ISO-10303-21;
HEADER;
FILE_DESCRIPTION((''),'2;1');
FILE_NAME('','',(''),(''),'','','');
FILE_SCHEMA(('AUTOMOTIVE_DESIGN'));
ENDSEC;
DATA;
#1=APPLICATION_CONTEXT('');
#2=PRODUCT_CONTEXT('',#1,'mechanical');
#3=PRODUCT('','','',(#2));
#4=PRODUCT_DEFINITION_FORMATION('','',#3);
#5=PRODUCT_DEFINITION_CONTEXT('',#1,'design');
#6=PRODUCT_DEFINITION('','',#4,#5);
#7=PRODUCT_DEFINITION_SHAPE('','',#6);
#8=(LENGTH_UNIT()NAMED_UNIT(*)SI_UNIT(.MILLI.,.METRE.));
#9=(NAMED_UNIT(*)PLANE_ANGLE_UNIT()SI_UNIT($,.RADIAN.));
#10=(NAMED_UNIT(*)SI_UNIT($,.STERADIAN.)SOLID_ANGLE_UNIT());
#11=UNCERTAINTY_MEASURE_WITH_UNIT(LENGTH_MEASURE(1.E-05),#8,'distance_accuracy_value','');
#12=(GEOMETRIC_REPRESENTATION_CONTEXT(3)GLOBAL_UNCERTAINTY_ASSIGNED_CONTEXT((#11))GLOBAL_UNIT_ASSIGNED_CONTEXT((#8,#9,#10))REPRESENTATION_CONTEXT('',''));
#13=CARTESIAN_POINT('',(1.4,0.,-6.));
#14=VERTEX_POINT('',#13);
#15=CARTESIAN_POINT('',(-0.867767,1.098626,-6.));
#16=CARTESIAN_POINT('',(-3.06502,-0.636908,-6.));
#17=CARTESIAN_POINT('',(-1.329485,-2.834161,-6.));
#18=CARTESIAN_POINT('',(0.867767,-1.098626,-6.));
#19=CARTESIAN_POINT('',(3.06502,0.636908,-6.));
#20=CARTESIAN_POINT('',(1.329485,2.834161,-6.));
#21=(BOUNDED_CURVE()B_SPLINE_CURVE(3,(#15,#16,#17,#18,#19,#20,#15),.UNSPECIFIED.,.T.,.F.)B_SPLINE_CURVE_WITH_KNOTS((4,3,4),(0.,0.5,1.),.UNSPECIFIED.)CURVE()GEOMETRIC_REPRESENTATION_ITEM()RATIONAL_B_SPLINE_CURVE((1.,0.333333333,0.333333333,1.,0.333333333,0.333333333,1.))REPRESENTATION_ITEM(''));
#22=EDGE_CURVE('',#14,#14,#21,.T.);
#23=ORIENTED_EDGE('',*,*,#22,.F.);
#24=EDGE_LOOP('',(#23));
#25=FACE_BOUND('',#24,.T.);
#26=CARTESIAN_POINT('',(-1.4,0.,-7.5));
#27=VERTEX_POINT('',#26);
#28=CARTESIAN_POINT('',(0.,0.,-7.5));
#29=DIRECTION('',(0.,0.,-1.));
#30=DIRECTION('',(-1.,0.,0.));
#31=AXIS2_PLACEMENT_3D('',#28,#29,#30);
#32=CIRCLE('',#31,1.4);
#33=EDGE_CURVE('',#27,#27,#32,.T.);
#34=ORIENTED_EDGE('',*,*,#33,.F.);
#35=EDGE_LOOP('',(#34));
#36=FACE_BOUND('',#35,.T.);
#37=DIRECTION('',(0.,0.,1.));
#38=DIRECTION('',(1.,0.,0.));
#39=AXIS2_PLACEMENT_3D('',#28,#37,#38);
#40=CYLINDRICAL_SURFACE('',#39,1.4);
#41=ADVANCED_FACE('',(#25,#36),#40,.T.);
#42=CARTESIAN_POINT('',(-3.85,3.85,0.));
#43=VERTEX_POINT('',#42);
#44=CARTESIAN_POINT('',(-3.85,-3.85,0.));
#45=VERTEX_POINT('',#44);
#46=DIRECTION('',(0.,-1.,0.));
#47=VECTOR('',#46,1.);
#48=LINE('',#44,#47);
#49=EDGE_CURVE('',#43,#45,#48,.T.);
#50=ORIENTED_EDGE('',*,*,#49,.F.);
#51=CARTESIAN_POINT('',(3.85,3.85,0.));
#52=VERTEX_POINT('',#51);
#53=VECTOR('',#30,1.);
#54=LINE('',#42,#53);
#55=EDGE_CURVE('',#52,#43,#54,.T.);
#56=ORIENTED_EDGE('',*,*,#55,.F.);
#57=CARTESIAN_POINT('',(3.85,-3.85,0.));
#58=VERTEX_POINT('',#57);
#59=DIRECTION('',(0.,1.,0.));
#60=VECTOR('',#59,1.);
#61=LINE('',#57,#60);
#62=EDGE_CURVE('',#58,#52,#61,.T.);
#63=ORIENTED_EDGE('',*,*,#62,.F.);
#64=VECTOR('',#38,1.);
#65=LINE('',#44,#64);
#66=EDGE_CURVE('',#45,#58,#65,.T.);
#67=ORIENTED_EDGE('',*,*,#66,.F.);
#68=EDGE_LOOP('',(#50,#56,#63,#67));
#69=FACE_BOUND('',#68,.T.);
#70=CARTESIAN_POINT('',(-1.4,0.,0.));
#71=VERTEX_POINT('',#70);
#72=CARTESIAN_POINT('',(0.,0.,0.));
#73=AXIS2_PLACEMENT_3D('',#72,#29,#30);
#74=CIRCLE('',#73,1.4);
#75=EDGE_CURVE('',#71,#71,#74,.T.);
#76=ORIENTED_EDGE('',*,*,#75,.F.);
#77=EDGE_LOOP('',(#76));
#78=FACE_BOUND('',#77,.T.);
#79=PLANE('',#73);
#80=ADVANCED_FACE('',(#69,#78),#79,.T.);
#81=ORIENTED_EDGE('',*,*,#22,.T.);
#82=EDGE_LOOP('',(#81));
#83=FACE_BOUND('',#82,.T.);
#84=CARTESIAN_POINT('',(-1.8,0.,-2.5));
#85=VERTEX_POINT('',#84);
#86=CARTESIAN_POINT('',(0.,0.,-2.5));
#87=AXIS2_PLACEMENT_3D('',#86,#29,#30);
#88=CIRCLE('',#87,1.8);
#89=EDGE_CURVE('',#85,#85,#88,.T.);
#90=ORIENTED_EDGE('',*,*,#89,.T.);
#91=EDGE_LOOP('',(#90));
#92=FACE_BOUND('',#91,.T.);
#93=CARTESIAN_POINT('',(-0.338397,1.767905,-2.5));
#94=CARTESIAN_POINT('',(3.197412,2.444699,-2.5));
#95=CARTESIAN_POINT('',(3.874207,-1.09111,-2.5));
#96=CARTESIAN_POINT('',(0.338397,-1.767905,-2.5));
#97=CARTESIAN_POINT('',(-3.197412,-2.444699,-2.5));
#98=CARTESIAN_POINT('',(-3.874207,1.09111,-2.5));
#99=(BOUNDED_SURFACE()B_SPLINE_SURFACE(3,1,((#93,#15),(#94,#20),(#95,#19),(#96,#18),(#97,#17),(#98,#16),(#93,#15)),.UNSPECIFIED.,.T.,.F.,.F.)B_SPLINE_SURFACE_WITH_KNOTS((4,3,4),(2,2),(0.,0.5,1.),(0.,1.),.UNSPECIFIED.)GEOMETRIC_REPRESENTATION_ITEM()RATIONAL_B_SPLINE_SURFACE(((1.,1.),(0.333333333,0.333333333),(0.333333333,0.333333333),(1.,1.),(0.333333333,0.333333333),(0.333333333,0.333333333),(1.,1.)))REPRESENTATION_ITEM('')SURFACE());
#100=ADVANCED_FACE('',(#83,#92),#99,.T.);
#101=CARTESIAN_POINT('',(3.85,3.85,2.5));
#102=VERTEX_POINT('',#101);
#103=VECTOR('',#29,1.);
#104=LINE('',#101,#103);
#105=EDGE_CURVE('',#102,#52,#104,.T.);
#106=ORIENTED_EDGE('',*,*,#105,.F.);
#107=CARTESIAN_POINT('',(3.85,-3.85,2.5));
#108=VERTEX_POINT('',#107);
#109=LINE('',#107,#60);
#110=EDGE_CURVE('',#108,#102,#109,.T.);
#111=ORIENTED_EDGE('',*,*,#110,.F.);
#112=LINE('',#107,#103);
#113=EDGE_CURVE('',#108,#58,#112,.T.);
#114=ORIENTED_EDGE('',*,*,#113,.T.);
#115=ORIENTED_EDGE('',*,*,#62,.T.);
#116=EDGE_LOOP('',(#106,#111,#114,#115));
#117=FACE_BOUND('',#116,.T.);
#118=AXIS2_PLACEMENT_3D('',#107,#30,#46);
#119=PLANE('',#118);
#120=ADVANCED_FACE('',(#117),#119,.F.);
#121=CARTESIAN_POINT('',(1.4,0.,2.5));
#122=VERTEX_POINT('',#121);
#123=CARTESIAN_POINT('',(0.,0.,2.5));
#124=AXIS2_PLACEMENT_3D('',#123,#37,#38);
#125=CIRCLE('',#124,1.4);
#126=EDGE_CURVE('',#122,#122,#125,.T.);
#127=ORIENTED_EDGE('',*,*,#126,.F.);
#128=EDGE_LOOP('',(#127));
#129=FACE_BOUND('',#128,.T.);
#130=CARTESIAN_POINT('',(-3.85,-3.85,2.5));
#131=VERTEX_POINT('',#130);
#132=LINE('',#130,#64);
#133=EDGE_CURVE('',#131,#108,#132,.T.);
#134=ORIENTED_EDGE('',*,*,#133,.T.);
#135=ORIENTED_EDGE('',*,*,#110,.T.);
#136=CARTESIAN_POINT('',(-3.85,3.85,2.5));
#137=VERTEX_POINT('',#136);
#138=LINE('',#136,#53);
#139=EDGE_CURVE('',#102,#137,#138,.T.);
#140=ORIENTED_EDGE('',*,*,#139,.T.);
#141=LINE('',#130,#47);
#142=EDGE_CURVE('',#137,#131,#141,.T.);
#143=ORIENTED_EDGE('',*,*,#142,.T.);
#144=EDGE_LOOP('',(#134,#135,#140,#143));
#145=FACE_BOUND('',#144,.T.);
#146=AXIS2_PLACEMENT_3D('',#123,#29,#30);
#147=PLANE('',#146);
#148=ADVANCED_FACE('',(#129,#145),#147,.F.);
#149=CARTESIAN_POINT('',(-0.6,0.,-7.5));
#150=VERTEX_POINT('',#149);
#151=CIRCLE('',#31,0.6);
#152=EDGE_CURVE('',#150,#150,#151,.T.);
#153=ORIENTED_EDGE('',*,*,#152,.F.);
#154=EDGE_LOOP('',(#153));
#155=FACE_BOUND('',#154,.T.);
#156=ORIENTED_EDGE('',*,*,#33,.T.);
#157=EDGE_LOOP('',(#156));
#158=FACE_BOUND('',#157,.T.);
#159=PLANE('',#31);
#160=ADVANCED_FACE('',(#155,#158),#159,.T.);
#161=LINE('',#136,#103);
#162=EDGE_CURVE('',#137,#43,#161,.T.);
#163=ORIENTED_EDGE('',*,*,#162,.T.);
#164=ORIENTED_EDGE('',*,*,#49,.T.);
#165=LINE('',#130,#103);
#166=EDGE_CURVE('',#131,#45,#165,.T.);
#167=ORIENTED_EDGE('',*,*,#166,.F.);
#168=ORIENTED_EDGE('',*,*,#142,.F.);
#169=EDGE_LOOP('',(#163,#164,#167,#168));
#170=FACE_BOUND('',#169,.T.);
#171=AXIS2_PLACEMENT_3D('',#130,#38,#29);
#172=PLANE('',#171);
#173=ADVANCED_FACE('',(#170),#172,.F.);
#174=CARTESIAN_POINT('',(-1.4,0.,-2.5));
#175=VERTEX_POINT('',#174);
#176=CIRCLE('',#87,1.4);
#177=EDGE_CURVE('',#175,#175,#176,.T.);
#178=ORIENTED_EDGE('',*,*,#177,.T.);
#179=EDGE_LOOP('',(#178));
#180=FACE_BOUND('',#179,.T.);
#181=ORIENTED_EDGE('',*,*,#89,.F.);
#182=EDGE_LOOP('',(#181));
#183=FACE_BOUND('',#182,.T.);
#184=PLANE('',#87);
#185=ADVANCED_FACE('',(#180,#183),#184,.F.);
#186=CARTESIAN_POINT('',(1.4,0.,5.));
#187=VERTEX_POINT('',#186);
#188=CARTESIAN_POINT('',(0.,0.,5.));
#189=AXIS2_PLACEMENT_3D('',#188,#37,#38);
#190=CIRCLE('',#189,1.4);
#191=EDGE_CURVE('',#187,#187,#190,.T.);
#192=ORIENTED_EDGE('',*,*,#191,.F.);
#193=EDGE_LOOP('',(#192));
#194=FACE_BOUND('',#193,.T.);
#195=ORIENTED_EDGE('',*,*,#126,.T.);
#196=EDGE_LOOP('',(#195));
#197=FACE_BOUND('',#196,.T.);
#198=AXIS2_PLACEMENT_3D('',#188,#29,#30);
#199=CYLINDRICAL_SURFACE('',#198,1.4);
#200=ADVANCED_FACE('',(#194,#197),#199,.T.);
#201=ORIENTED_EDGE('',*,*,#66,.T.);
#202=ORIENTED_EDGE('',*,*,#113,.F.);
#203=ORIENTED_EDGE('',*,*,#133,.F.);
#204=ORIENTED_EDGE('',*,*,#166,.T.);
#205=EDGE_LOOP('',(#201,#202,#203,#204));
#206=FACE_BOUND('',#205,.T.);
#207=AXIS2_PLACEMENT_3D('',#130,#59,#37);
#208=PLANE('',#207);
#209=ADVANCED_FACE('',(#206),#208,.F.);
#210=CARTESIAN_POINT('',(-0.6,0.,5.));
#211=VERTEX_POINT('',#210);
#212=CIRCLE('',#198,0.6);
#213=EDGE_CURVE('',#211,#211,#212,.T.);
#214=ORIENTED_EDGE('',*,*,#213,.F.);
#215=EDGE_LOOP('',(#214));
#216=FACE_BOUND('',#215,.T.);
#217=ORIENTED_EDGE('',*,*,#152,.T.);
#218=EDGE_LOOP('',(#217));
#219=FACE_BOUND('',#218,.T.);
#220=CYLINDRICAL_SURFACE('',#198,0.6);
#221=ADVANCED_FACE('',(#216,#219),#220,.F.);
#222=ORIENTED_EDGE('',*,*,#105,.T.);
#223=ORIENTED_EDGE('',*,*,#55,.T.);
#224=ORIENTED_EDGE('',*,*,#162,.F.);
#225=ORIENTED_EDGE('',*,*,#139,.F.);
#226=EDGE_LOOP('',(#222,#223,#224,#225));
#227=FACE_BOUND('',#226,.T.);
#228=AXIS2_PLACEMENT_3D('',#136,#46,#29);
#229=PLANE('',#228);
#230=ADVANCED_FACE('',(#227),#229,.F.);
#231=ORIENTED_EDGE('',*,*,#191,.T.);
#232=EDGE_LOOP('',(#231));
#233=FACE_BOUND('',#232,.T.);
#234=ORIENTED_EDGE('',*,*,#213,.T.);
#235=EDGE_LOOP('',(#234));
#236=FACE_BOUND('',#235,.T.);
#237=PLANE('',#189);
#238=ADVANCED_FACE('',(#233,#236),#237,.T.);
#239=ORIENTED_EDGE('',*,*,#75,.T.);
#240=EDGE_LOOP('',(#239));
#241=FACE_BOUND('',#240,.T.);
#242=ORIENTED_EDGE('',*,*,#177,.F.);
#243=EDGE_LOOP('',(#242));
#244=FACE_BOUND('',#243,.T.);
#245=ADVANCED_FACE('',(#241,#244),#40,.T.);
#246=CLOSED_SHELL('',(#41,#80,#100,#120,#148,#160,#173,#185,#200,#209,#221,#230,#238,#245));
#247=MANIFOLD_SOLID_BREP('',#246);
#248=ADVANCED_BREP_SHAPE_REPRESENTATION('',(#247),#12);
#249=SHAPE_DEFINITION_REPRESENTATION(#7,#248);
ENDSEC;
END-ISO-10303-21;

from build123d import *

# Parameters (mm, degrees)
CROQUIS1_W              = 7.7
CROQUIS1_H              = 7.7
SALIENTE_EXTRUIR1_DEPTH = 2.5
CROQUIS2_R              = 1.4
SALIENTE_EXTRUIR2_DEPTH = 7.5
SALIENTE_EXTRUIR3_START = 2.5
CROQUIS7_R              = 1.4
SALIENTE_EXTRUIR3_DEPTH = 2.5
CROQUIS6_R              = 0.6
CORTAR_EXTRUIR1_DEPTH   = 14.634331667


with BuildPart() as part:
    # Croquis1 → Saliente-Extruir1 (new body)
    with BuildSketch(Plane.XY):
        Rectangle(CROQUIS1_W, CROQUIS1_H)
    extrude(amount=SALIENTE_EXTRUIR1_DEPTH)

    # Croquis2 → Saliente-Extruir2 (add)
    with BuildSketch(Plane(origin=(0, 0, 0), x_dir=(-1, 0, 0), z_dir=(0, 0, -1))):
        Circle(CROQUIS2_R)
    extrude(amount=SALIENTE_EXTRUIR2_DEPTH)

    # Recubrir2: read off the stored shape, not the designer's step
    # Recubrir2: loft between two sections, ruled curve by curve
    recubrir2_from = [
        Edge.make_bspline([(-0.33839724, 1.767904779, -2.5), (3.197412318, 2.44469926, -2.5), (3.874206798, -1.091110298, -2.5), (0.33839724, -1.767904779, -2.5), (-3.197412318, -2.44469926, -2.5), (-3.874206798, 1.091110298, -2.5), (-0.33839724, 1.767904779, -2.5)], [0, 0, 0, 0, 0.5, 0.5, 0.5, 1, 1, 1, 1], 3, [1, 0.333333333, 0.333333333, 1, 0.333333333, 0.333333333, 1]),
    ]
    recubrir2_to = [
        Edge.make_bspline([(-0.867767345, 1.09862634, -6), (1.329485334, 2.83416103, -6), (3.065020025, 0.636908351, -6), (0.867767345, -1.09862634, -6), (-1.329485334, -2.83416103, -6), (-3.065020025, -0.636908351, -6), (-0.867767345, 1.09862634, -6)], [0, 0, 0, 0, 0.5, 0.5, 0.5, 1, 1, 1, 1], 3, [1, 0.333333333, 0.333333333, 1, 0.333333333, 0.333333333, 1]),
    ]
    recubrir2 = Solid(Shell([*[Face.make_surface_from_curves(recubrir2_from[k], recubrir2_to[k]) for k in range(1)], Face(Wire(recubrir2_from)), Face(Wire(recubrir2_to))]))
    add(recubrir2)

    # Croquis7 → Saliente-Extruir3 (add)
    with BuildSketch(Plane.XY.offset(2.5).offset(SALIENTE_EXTRUIR3_START)):
        with Locations(Location((0, 0, 0), (0, 0, 180))):
            Circle(CROQUIS7_R)
    extrude(amount=-SALIENTE_EXTRUIR3_DEPTH)

    # Croquis6 → Cortar-Extruir1 (cut, through all)
    with BuildSketch(Plane(origin=(0, 0, -7.5), x_dir=(-1, 0, 0), z_dir=(0, 0, -1))):
        Circle(CROQUIS6_R)
    extrude(amount=-CORTAR_EXTRUIR1_DEPTH, mode=Mode.SUBTRACT)


solid = part.part
